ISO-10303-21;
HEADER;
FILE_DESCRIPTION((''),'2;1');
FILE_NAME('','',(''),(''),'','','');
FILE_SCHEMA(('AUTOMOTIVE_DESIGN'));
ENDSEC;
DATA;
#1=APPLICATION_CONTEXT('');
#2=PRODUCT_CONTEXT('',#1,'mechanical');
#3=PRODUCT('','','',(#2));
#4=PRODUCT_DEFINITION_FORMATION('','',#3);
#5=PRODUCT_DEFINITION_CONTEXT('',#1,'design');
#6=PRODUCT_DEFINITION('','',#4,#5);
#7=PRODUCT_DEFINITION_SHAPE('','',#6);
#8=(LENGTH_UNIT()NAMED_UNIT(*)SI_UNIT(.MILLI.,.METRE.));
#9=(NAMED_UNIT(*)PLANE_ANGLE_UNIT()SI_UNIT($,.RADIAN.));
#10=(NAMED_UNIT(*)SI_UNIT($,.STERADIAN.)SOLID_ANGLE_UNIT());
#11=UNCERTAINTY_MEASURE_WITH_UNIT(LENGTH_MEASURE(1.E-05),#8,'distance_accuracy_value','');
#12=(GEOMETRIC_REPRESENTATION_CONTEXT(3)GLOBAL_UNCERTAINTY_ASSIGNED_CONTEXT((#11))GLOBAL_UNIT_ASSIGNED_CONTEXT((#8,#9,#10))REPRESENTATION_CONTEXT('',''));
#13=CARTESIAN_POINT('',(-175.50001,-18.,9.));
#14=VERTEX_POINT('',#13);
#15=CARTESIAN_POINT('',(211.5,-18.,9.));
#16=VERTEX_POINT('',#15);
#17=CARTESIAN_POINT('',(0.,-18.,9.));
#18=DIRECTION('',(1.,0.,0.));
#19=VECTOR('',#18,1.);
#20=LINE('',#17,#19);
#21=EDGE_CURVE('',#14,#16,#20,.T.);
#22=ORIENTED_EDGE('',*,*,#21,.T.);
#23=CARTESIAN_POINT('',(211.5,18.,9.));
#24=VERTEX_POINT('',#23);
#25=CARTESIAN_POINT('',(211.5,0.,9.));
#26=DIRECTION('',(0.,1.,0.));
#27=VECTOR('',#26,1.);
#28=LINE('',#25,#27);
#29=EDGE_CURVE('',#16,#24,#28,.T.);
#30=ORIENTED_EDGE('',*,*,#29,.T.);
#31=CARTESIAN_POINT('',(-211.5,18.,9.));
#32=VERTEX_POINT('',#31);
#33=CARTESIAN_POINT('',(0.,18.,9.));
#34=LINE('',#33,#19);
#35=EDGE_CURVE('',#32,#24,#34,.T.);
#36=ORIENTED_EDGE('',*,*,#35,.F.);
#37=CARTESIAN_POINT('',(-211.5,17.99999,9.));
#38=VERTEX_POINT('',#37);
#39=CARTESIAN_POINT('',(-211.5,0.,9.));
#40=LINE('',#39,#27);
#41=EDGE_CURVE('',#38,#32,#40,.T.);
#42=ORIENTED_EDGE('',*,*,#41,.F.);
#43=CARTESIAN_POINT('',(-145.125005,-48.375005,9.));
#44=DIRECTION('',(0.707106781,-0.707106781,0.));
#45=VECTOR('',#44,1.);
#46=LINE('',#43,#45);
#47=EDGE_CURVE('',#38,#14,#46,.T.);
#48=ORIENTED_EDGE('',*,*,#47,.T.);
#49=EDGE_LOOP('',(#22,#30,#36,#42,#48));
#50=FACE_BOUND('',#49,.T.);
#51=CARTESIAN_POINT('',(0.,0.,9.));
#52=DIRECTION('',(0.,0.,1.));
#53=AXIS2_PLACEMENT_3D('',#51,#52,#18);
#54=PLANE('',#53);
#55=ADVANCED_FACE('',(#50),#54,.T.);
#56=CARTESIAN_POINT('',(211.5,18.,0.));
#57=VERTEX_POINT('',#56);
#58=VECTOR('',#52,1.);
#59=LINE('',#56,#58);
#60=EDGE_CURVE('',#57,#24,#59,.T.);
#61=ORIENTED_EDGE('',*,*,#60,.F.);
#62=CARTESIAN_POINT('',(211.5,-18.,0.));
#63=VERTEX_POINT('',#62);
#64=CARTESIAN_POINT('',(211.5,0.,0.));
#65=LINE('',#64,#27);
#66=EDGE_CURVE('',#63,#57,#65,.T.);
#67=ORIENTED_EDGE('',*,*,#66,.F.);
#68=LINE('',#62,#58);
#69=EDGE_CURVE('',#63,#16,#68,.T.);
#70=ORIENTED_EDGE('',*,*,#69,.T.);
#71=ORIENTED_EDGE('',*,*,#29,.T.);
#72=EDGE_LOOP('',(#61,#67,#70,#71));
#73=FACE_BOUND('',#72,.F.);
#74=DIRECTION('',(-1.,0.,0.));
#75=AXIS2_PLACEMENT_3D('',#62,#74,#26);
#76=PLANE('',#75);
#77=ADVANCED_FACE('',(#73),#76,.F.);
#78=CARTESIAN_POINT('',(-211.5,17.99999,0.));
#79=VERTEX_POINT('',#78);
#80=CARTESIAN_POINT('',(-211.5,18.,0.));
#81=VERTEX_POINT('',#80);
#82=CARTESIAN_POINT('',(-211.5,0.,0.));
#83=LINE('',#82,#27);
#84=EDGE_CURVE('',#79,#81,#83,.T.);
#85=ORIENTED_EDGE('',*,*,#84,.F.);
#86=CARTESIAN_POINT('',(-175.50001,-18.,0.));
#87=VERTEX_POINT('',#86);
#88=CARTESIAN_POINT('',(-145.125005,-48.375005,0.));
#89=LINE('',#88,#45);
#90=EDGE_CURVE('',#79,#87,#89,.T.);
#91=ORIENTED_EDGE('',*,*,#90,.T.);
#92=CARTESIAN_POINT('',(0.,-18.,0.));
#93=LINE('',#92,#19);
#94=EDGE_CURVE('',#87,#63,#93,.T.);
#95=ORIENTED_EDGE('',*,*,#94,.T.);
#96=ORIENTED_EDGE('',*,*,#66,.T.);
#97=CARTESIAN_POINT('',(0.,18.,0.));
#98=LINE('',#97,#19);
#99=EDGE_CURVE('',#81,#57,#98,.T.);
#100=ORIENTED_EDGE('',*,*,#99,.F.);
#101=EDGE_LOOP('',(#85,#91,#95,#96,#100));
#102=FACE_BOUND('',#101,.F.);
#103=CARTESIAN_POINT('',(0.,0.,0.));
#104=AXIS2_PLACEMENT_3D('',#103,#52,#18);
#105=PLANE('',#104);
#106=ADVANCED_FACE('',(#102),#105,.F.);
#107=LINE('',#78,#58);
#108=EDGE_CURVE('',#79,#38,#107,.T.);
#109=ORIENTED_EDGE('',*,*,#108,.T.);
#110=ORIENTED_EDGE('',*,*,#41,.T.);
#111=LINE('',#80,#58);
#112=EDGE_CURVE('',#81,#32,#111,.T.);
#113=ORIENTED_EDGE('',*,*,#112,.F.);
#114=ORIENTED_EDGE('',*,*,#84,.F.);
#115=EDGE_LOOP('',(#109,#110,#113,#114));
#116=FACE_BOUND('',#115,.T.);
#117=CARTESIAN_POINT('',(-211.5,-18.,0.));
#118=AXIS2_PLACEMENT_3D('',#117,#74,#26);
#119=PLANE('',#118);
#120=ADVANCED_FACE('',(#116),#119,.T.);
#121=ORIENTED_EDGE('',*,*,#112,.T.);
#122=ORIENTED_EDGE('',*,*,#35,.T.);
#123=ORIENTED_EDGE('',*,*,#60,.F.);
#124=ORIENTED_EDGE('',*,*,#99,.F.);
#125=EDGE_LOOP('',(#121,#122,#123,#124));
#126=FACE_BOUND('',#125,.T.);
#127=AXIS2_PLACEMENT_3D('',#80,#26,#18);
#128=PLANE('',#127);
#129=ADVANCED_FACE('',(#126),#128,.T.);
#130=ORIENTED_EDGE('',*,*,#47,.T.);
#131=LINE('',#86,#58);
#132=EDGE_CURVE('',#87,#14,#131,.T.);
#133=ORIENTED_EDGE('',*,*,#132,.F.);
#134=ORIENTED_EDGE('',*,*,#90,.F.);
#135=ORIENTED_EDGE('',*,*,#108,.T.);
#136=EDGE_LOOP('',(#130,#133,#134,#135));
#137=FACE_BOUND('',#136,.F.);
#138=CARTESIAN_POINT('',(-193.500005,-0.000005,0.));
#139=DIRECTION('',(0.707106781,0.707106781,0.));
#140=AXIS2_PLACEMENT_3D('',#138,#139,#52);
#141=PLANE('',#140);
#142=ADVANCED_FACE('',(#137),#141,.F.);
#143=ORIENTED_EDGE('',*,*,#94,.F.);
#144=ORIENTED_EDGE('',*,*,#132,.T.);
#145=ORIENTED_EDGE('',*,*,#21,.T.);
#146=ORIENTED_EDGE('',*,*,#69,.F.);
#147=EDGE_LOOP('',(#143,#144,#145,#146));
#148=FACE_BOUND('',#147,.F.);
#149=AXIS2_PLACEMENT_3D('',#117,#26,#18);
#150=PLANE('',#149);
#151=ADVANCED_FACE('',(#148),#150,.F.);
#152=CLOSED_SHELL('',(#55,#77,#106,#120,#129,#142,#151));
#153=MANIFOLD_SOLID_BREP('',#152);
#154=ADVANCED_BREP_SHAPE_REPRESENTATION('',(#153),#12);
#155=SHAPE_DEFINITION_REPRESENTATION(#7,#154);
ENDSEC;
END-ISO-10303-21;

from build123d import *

# Parameters (mm, degrees)
F0_W     = 423
F0_H     = 36
F1_DEPTH = 9
F2_SIZE  = 35.99999


# Not quite as in the source:
# - a fillet or chamfer is up to 0.001 mm smaller than in the source, because OpenCascade refuses the exact size


with BuildPart() as f1:
    # F0 (on Top) → F1 (new body)
    with BuildSketch(Plane.XY):
        Rectangle(F0_W, F0_H)
    extrude(amount=F1_DEPTH)

    # F2 (size 36 in the source; OpenCascade refuses exactly that, so slightly less here)
    f2_edges = [f1.edges().sort_by_distance(p)[0] for p in [
        (-211.5, -18, 4.5),
    ]]
    chamfer(f2_edges, length=F2_SIZE)


solid = f1.part
